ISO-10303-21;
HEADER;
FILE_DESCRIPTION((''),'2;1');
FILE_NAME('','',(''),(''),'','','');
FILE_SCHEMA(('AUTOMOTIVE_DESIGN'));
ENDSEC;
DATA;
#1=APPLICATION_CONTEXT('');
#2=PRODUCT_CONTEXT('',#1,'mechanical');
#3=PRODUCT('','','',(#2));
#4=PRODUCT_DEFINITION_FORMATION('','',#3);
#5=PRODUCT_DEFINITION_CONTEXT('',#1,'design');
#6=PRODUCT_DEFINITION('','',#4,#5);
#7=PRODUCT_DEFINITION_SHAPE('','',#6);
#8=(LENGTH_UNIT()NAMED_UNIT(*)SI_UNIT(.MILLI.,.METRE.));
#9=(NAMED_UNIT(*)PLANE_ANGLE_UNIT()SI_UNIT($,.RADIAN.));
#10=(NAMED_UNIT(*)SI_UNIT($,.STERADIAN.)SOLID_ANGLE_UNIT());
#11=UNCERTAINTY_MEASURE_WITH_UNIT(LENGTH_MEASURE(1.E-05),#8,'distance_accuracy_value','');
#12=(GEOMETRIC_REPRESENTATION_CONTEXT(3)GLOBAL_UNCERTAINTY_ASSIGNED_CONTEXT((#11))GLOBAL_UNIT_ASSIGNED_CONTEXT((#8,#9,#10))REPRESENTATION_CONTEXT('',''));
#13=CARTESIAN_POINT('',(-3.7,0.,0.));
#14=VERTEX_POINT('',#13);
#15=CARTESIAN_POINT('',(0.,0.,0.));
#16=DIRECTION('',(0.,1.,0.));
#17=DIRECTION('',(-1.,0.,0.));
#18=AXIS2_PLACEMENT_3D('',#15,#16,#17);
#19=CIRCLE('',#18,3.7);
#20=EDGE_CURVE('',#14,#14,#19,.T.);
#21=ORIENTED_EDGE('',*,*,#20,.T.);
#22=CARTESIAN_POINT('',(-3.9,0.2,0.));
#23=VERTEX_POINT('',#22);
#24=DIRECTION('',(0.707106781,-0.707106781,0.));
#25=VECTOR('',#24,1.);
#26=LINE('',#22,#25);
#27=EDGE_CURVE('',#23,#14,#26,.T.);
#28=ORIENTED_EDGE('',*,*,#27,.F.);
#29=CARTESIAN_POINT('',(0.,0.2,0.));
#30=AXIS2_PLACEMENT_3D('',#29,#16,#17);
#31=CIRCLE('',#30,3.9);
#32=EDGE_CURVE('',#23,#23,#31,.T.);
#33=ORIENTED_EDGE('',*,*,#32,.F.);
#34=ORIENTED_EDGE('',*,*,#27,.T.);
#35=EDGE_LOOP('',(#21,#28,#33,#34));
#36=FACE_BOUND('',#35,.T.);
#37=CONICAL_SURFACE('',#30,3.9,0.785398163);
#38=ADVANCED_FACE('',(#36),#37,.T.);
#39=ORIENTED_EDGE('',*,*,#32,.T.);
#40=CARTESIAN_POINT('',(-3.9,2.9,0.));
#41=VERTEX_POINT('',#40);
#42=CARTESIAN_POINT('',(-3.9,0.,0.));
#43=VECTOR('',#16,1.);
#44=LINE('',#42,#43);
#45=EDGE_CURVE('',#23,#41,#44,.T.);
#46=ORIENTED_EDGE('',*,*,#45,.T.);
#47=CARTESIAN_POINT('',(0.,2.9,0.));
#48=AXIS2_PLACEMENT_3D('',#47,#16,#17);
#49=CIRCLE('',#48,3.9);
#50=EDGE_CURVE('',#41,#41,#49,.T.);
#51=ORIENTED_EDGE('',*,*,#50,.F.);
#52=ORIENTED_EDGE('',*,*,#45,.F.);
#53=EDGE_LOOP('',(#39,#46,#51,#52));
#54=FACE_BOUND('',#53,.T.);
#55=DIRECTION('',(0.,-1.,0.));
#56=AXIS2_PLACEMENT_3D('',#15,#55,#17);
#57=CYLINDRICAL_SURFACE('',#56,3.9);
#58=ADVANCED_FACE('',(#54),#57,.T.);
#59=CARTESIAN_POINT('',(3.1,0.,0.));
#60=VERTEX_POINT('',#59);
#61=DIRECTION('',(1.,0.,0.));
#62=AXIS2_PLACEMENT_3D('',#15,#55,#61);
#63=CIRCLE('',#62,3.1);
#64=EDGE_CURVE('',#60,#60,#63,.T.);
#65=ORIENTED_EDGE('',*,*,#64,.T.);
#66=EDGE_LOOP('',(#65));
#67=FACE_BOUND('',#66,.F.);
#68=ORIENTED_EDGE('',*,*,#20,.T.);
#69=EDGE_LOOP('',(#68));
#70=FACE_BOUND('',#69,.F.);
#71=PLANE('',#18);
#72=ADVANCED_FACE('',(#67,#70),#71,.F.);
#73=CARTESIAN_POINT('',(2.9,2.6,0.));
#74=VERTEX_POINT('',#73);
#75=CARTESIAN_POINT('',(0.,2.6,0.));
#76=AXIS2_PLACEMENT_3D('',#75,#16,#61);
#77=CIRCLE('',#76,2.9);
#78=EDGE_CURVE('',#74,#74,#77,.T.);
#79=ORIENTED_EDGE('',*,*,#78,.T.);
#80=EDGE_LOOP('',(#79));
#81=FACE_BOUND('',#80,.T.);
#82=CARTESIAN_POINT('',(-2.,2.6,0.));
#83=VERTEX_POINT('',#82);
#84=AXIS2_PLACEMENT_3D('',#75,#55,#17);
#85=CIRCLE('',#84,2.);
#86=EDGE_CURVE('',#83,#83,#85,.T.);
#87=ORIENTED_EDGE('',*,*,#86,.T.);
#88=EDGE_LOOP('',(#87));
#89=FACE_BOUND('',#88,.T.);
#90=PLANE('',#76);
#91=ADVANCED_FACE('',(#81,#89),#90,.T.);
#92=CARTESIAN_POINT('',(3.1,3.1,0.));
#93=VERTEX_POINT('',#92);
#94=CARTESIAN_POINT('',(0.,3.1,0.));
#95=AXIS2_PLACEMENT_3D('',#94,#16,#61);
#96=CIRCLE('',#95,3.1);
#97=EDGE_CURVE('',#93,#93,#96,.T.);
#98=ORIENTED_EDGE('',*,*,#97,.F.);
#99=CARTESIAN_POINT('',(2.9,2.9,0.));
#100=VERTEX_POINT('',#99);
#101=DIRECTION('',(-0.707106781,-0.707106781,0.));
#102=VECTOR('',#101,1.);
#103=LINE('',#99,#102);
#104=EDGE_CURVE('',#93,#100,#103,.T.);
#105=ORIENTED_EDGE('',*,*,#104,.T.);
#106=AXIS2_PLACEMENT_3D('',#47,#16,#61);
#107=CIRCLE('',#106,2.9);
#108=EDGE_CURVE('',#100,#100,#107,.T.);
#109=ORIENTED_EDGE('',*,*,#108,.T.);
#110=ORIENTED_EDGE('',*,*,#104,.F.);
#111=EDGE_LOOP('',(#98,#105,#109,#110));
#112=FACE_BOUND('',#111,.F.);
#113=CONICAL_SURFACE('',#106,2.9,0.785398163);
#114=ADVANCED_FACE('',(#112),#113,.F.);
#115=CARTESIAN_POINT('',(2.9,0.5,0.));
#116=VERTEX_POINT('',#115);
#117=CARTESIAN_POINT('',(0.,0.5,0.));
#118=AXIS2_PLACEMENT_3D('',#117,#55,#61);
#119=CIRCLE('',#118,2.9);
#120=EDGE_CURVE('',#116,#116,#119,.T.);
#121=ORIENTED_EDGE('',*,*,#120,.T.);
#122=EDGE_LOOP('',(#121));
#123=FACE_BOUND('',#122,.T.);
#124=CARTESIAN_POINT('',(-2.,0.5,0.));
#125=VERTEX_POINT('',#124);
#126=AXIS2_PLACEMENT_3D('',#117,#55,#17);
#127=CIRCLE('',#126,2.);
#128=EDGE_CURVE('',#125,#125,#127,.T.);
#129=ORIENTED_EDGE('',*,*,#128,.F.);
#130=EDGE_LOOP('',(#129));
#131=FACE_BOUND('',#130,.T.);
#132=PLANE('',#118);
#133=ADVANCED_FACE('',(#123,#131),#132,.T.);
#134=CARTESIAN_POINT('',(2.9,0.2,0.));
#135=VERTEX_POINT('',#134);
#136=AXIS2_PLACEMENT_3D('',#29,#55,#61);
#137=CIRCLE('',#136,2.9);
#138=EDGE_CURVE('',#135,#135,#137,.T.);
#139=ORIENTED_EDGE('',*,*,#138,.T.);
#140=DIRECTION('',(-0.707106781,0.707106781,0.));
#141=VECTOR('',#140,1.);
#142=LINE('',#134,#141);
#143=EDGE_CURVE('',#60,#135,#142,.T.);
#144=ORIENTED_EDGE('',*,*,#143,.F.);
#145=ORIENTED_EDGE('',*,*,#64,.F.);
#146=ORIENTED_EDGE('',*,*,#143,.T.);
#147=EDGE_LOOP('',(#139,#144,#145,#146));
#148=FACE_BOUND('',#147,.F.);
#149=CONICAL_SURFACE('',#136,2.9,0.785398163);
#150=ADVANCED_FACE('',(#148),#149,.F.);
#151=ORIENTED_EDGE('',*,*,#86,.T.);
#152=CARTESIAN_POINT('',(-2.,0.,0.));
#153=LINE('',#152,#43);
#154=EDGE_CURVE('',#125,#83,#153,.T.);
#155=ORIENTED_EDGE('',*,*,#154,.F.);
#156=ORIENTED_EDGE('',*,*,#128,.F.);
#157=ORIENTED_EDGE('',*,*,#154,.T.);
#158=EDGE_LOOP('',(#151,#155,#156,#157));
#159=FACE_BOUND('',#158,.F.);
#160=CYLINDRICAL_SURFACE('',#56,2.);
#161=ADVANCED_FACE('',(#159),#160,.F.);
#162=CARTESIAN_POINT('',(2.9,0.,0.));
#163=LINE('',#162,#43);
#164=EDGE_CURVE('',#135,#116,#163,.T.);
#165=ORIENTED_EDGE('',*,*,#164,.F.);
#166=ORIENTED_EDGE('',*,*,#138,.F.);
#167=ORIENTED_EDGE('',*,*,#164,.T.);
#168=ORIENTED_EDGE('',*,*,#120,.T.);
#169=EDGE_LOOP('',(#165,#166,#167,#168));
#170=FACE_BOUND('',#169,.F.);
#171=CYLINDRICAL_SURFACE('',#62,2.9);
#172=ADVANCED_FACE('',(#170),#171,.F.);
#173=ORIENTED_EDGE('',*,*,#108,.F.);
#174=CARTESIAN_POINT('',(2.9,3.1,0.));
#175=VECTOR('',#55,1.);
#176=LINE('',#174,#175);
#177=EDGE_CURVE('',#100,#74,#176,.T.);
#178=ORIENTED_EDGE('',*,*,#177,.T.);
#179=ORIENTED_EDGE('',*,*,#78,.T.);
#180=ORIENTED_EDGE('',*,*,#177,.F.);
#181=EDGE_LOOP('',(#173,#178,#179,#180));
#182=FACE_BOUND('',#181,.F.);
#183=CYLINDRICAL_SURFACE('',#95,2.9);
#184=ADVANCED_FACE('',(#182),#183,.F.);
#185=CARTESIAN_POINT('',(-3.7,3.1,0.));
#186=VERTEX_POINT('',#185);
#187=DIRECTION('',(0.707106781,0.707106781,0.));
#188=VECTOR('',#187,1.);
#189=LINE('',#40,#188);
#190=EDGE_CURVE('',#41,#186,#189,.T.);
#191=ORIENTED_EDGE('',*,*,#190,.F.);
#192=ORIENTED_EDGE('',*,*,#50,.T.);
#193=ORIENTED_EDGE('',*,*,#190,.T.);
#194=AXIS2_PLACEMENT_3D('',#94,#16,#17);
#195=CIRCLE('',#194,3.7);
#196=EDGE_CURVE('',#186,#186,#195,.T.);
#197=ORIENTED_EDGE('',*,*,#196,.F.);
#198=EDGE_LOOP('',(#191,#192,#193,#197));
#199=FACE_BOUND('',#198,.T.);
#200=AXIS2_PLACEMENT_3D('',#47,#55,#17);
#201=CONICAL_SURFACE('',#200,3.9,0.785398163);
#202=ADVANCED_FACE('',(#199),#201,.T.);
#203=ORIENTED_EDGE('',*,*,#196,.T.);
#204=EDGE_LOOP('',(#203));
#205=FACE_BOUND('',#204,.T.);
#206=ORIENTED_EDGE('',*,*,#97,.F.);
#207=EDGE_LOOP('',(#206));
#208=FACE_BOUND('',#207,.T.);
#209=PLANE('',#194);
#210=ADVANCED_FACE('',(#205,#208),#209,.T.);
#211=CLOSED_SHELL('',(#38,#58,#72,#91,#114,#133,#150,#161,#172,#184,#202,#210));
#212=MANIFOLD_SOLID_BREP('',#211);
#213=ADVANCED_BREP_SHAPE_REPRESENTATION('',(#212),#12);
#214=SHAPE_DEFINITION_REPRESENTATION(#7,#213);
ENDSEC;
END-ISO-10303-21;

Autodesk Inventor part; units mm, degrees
ref_plane "YZ Plane" through (0, 0, 0) normal (1, 0, 0) x (0, 1, 0)
ref_plane "XZ Plane" through (0, 0, 0) normal (0, 1, 0) x (-1, 0, 0)
ref_plane "XY Plane" through (0, 0, 0) normal (0, 0, 1) x (1, 0, 0)
sketch "Эскиз1" plane through (0, 0, 0) normal (0, 1, 0) x (-1, 0, 0)
  circle A0 centre (0, 0) radius 3.9
  circle A1 centre (0, 0) radius 2
  dimension "d0" = 7.8
  dimension "d1" = 4
extrude "Выдавливание1" add sketch "Эскиз1" along normal blind 3.1
sketch "Эскиз2" plane through (0, 3.1, 0) normal (0, 1, 0) x (1, 0, 0)
  circle A0 centre (0, 0) radius 3
  circle A1 centre (0, 0) radius 2.9
  circle A2 centre (0, 0) radius 3.9 projected
  circle A3 centre (0, 0) radius 2 projected
  dimension "d4" = 1
  dimension "d5" = 1
extrude "Выдавливание2" cut sketch "Эскиз2" against normal blind 0.5 contours A1 | A3
sketch "Эскиз3" plane through (0, 0, 0) normal (0, -1, 0) x (1, 0, 0)
  circle A0 centre (0, 0) radius 2.9 projected
  circle A1 centre (0, 0) radius 3
  circle A2 centre (0, 0) radius 2.9
  circle A3 centre (0, 0) radius 3.9
  circle A4 centre (0, 0) radius 2
  dimension "d13" = 1
  dimension "d14" = 1
extrude "Выдавливание3" cut sketch "Эскиз3" against normal blind 0.5 contours A0 | A4
chamfer "Фаска1" distance 0.2 angle 45 4 edges at (-2.9, 0, 0) (3.9, 0, 0) (3.9, 3.1, 0) (-2.9, 3.1, 0)
sketch "Эскиз4" plane through (0, 3.1, 0) normal (0, 1, 0) x (1, 0, 0)
  circle A0 centre (0, 0) radius 3.7 projected
  circle A1 centre (0, 0) radius 3.1 projected
  circle A2 centre (0, 0) radius 3.9 projected
  circle A3 centre (0, 0) radius 2.9 projected
  circle A4 centre (0, 0) radius 2 projected
properties part number "Подшипник 626Z" material "Титан"
